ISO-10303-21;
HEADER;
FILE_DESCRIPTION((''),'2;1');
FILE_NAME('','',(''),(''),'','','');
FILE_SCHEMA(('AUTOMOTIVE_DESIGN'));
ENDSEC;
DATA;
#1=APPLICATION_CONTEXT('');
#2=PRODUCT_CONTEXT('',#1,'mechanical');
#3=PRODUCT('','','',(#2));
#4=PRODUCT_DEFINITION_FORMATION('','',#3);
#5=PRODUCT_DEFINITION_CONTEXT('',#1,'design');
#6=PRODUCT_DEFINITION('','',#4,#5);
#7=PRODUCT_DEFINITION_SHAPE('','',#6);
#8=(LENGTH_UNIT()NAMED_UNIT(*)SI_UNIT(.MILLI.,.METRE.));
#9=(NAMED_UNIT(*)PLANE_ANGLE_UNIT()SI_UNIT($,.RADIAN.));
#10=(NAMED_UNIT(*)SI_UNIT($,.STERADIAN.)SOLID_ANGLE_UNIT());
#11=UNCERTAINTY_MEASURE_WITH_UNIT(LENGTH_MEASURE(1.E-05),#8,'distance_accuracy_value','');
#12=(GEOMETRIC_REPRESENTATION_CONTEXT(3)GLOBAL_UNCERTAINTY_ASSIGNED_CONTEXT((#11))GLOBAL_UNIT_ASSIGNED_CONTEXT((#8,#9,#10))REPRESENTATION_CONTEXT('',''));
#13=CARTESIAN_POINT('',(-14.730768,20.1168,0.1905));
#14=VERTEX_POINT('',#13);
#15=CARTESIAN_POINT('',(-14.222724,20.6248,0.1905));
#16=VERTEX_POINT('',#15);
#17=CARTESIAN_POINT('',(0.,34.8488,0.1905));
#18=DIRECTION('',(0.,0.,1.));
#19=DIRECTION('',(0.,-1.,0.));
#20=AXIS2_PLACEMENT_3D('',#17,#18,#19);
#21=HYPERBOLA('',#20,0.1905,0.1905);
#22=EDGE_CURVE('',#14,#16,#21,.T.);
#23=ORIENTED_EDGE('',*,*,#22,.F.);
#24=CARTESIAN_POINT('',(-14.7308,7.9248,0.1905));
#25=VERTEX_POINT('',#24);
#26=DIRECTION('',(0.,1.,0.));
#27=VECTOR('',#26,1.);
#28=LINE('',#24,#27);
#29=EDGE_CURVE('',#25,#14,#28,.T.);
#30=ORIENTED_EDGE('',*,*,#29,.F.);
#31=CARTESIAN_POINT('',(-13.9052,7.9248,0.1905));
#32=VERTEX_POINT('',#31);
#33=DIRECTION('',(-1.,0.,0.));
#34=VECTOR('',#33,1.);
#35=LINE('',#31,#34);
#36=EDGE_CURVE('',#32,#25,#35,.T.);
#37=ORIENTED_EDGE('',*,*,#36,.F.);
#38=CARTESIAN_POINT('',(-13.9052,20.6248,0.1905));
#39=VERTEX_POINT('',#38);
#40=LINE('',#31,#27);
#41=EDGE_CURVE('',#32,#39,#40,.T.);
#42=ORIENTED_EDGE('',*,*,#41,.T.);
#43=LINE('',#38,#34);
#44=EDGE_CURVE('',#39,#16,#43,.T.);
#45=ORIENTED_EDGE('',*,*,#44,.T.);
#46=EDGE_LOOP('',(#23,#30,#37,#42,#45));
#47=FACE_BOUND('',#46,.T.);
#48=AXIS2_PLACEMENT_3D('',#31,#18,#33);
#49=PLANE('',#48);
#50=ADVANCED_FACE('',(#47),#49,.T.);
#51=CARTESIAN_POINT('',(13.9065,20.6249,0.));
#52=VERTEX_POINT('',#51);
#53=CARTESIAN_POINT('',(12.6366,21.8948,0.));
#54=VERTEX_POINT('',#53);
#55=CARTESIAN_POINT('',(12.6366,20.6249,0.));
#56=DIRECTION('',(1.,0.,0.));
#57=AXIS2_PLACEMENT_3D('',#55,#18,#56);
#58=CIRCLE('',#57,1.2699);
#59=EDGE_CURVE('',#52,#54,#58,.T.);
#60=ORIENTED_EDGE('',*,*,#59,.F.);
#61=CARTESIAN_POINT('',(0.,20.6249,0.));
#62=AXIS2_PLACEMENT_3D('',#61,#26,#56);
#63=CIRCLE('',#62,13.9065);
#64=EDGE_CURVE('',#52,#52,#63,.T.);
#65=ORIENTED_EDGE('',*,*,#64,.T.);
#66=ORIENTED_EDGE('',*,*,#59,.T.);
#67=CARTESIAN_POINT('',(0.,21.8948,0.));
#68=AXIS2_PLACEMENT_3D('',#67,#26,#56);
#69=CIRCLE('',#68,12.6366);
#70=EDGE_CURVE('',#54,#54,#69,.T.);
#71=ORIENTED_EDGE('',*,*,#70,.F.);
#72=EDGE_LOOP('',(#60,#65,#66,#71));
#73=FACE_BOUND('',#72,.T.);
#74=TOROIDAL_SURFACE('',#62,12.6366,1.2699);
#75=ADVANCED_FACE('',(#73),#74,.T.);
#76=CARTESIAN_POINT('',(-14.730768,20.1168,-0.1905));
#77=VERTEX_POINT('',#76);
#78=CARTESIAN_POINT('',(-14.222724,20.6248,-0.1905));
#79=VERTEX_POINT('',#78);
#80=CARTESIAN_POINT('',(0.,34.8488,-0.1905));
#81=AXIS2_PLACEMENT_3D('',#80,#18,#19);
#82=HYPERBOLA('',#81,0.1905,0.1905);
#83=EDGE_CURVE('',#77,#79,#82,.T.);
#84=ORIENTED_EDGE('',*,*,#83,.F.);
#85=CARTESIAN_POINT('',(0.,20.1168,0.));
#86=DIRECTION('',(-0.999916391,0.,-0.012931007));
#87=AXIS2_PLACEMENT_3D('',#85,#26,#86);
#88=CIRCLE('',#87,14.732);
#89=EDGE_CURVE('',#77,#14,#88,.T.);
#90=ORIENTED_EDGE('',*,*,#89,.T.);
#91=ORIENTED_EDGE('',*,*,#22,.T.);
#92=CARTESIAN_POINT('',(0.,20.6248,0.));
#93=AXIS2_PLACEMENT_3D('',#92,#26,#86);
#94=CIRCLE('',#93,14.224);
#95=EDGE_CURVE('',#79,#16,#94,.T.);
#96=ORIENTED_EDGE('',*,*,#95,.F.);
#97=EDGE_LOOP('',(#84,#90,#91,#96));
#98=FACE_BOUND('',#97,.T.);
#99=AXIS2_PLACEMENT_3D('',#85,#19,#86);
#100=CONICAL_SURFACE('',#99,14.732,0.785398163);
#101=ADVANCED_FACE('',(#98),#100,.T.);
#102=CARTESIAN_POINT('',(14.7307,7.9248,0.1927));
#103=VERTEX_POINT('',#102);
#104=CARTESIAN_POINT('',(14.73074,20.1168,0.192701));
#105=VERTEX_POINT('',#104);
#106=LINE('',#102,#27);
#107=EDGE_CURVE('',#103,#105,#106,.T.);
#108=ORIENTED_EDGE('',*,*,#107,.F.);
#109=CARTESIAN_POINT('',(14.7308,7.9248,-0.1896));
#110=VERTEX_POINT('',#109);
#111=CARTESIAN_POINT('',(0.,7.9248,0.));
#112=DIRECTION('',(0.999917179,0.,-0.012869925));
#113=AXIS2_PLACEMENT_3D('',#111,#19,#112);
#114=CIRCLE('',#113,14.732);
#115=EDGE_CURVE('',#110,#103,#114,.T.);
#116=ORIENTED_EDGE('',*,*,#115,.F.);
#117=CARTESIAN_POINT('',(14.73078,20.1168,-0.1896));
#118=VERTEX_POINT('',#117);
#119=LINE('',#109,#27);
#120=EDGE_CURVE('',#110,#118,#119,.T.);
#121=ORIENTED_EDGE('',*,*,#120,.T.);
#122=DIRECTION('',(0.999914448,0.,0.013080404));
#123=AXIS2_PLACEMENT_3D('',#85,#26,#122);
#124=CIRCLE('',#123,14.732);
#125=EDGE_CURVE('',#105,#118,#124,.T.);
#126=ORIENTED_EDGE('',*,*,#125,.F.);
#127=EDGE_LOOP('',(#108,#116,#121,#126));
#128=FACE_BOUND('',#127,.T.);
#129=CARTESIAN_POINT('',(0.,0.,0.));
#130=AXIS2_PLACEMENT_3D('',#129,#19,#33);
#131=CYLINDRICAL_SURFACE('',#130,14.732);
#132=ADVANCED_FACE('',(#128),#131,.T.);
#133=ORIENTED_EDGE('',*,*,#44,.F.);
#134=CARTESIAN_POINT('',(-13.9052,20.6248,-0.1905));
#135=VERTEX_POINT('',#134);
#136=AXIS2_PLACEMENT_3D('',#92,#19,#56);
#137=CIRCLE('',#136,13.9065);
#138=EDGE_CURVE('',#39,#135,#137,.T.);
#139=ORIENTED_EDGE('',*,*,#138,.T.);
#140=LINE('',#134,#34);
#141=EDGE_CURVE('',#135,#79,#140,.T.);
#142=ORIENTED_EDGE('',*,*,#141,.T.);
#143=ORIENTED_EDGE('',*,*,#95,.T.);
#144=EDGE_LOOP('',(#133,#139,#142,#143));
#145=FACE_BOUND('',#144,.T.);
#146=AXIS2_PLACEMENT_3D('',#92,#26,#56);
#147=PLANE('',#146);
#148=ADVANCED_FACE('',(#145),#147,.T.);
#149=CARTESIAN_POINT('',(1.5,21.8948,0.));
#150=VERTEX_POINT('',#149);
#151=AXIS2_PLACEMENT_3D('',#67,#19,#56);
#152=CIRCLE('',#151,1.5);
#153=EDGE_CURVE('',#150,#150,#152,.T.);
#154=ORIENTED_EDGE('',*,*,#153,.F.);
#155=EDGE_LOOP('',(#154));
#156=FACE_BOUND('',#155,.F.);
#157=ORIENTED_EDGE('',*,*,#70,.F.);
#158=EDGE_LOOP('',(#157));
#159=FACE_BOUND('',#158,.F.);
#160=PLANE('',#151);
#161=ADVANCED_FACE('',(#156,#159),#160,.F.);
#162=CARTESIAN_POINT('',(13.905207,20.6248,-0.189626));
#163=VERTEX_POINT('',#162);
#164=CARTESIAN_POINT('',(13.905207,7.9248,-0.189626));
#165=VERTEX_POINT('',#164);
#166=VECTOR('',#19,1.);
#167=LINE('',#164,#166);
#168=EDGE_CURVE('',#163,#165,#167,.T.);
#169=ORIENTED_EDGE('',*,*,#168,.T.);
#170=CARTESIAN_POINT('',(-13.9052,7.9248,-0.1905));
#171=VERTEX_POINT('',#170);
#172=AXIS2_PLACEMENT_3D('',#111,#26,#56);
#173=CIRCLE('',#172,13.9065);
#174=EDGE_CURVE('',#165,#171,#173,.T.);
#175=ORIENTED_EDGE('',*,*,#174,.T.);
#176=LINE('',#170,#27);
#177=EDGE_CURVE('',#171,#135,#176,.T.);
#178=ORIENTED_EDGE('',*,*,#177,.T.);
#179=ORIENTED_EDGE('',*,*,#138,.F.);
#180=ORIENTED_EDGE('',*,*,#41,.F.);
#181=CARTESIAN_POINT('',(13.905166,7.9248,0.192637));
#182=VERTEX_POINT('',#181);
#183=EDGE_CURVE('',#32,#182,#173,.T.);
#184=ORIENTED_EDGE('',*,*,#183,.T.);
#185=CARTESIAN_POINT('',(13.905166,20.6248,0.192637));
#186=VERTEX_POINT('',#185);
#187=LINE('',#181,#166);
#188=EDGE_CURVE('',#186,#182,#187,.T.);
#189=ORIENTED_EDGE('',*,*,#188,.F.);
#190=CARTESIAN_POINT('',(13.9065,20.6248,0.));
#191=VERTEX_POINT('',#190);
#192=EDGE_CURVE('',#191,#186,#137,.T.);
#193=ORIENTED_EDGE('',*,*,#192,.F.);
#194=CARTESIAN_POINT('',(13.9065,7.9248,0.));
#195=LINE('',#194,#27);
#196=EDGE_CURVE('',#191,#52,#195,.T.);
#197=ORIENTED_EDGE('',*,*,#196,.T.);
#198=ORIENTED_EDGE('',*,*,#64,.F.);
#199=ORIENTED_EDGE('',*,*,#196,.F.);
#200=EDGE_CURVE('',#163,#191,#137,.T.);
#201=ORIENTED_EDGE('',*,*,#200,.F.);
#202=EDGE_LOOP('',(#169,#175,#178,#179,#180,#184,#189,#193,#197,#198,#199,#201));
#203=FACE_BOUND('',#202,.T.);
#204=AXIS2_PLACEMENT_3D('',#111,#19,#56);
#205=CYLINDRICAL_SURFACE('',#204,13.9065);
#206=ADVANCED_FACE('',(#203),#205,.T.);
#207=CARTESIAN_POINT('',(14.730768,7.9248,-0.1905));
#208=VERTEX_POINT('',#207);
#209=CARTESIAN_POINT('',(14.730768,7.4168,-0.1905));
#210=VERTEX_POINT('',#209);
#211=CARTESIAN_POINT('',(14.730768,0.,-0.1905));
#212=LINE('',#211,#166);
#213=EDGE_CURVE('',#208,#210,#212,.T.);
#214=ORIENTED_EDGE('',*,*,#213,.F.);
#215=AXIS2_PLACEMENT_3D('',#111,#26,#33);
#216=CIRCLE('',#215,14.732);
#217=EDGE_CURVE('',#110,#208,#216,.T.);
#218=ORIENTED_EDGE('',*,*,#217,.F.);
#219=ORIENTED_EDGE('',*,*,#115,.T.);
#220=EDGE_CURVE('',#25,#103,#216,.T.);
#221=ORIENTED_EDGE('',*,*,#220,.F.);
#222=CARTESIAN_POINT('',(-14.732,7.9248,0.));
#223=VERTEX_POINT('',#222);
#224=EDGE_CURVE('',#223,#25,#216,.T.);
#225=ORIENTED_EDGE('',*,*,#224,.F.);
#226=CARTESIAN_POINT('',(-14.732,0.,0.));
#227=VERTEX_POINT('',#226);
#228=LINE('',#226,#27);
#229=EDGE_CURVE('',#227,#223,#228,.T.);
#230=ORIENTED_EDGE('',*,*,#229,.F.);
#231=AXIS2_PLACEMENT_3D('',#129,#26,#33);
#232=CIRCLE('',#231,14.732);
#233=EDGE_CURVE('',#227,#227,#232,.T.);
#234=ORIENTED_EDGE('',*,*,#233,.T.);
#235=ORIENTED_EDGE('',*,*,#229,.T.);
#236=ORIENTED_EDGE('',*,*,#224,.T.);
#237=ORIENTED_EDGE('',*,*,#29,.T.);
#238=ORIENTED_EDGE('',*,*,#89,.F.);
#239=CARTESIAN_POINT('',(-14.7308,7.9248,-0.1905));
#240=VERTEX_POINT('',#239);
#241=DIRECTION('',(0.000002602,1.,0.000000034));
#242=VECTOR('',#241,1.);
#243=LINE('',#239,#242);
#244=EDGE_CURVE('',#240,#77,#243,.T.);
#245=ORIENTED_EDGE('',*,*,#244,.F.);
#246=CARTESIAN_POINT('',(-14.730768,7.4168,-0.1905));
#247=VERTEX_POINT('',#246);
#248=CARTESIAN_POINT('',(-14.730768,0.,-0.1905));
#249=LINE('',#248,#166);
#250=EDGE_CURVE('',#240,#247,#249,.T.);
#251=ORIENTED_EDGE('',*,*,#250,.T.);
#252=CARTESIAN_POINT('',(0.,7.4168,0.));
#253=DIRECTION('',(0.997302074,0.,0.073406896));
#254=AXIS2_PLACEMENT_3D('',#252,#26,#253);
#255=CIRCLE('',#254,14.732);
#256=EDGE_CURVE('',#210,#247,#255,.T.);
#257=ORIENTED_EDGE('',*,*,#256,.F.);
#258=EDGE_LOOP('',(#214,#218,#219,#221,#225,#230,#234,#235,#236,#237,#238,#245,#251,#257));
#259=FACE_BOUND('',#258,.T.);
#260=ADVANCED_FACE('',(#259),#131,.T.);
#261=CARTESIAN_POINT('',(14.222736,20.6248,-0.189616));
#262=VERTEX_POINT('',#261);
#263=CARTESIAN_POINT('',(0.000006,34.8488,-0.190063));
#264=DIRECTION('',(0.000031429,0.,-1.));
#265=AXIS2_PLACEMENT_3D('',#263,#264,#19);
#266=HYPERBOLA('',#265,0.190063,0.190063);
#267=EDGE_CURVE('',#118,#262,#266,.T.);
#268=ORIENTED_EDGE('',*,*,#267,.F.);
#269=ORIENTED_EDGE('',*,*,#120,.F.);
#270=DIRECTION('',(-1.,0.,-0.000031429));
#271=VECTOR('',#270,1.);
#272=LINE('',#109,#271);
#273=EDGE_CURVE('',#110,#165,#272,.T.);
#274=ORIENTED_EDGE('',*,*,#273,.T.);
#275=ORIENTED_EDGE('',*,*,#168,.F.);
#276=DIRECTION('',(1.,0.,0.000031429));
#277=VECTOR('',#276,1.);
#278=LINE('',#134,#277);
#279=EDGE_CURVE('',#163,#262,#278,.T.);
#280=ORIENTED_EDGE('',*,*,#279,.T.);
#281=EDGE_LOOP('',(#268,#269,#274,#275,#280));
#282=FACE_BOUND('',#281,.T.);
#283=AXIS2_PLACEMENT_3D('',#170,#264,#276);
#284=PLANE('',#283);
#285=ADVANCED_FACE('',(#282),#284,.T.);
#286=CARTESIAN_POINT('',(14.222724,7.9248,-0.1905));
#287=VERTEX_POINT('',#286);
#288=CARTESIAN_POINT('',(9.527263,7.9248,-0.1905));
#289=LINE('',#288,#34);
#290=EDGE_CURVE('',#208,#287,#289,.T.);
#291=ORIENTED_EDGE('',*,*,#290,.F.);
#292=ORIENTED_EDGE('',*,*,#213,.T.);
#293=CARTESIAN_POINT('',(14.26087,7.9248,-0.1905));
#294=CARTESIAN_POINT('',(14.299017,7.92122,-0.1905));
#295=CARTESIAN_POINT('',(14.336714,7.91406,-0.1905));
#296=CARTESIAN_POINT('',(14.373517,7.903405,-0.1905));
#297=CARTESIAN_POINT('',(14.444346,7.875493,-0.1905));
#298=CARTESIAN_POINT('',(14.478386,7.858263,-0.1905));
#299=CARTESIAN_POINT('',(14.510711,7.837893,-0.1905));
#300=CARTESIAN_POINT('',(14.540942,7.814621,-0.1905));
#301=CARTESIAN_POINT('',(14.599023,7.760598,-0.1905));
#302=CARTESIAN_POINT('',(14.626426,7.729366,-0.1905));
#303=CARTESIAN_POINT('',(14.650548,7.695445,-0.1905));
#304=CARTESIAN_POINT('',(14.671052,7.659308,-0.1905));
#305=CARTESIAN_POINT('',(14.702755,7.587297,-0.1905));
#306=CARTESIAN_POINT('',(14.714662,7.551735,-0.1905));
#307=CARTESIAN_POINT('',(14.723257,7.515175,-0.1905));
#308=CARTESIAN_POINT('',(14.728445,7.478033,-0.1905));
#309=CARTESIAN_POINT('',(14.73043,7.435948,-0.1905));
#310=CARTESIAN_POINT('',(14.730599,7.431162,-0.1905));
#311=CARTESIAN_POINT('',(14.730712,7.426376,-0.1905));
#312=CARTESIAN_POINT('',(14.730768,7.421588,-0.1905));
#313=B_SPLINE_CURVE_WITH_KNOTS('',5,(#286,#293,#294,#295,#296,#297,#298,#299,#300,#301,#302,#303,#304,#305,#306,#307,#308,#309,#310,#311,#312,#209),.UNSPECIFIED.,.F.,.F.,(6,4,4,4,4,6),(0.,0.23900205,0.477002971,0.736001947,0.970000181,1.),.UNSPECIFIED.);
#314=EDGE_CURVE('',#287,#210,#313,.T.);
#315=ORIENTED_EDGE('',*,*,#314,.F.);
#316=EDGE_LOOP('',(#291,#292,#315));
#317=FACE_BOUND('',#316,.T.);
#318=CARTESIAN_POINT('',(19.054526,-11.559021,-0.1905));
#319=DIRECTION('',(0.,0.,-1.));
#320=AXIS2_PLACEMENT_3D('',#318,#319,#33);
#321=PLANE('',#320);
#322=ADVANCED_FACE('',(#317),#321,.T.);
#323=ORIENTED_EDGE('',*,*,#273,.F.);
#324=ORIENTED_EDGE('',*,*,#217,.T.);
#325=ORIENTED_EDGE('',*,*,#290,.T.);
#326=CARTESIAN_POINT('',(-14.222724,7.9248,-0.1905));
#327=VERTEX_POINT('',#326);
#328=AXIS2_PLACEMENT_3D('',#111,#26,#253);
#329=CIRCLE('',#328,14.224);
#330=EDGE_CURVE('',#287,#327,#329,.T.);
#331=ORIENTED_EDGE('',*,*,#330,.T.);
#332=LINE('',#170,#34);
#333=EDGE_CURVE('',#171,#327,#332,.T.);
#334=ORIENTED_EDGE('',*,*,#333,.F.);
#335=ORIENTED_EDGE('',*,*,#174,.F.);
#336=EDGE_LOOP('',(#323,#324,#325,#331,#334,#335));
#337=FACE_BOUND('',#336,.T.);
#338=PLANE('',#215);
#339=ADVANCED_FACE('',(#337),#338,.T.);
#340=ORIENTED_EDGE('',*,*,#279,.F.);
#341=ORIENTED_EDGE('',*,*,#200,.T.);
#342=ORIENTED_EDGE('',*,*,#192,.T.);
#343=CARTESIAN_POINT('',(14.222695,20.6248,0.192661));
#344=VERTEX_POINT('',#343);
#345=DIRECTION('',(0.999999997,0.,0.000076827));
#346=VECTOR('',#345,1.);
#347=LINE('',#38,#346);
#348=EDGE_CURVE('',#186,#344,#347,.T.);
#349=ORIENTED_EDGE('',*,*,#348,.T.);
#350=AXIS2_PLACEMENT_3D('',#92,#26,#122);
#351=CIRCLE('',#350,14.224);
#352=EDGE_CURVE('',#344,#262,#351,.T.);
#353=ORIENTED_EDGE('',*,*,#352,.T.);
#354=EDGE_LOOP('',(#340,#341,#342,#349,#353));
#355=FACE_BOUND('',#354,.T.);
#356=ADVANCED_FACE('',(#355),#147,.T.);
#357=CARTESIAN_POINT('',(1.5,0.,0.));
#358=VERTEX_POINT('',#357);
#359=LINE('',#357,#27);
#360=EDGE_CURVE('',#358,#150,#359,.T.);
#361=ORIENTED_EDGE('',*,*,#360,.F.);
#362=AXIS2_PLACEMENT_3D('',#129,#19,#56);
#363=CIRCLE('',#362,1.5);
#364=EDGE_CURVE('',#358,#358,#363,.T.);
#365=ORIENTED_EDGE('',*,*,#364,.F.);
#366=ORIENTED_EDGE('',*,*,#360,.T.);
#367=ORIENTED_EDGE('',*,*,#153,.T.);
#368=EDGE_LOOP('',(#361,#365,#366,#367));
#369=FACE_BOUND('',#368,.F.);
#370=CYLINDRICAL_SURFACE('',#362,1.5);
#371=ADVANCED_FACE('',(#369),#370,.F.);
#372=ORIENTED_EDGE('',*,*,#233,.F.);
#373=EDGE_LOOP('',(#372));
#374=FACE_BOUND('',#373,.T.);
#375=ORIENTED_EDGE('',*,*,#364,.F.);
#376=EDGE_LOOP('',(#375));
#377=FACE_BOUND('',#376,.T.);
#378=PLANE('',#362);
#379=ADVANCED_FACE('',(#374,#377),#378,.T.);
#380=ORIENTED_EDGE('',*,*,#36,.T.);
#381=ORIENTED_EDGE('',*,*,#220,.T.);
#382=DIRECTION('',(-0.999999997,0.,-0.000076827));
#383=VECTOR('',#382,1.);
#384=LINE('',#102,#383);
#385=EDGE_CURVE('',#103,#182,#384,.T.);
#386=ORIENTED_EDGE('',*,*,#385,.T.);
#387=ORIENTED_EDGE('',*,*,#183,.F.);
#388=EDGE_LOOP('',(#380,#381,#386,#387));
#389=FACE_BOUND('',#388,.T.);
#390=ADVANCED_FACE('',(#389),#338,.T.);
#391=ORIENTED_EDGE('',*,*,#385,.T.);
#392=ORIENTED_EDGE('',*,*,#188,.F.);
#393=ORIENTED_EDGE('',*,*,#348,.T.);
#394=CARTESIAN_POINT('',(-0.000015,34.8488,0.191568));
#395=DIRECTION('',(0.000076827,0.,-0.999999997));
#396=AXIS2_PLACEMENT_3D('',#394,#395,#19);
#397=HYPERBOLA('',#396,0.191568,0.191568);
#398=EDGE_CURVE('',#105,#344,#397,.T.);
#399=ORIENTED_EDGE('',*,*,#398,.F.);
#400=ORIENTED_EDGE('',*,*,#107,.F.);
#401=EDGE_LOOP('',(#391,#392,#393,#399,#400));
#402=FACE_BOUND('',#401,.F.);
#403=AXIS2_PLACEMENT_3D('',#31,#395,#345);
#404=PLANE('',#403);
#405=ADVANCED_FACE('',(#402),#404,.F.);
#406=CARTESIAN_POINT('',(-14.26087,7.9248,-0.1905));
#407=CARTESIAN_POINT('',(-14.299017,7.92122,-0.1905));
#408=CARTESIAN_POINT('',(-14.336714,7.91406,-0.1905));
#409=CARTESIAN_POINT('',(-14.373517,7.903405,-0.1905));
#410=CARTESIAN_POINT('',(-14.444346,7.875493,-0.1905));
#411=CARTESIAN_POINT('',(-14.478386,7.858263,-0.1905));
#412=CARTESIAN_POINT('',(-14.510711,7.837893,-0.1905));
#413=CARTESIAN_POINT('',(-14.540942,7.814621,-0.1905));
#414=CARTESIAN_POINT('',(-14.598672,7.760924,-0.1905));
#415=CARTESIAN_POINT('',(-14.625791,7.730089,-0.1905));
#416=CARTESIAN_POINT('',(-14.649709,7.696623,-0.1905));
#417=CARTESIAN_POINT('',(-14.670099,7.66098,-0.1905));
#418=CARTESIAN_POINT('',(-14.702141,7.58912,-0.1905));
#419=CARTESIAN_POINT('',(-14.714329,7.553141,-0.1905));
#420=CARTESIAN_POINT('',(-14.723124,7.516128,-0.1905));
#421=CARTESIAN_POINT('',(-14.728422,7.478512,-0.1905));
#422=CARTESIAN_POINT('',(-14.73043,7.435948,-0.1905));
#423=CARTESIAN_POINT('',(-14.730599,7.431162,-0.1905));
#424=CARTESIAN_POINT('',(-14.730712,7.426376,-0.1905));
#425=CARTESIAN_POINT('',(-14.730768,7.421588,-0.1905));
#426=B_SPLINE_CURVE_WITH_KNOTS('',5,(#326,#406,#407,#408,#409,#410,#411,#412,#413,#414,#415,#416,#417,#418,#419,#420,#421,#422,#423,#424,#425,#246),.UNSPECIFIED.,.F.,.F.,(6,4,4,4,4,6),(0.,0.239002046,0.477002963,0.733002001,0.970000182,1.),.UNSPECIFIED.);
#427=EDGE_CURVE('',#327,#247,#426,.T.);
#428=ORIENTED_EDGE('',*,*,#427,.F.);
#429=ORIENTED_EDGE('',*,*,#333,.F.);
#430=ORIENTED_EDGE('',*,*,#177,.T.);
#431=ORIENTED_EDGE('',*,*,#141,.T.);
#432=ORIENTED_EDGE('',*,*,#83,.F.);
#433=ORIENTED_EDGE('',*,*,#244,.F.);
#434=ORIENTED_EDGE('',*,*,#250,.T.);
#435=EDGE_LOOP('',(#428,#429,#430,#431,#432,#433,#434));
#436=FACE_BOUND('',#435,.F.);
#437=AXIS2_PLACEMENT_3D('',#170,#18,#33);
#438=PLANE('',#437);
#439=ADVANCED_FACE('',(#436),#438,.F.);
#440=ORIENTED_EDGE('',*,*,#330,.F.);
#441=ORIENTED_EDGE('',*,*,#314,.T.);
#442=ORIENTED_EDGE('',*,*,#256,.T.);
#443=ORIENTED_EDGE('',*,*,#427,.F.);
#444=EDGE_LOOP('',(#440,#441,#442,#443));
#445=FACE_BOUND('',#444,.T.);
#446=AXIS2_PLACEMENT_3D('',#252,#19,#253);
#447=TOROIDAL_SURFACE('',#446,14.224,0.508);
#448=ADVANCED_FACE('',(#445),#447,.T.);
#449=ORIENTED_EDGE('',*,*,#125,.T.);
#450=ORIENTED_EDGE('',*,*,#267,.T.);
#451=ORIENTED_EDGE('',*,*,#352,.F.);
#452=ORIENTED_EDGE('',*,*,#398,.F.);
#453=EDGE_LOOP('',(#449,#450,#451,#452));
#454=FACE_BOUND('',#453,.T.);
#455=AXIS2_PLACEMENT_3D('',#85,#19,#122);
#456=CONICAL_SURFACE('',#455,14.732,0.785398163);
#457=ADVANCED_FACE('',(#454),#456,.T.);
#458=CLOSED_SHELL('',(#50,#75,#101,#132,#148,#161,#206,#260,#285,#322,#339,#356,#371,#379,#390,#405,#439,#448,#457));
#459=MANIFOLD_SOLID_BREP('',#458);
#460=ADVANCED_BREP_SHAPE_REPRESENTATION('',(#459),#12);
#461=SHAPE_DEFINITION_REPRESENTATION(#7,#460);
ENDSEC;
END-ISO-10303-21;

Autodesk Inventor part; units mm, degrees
ref_plane "YZ Plane" through (0, 0, 0) normal (1, 0, 0) x (0, 1, 0)
ref_plane "XZ Plane" through (0, 0, 0) normal (0, 1, 0) x (-1, 0, 0)
ref_plane "XY Plane" through (0, 0, 0) normal (0, 0, 1) x (1, 0, 0)
sketch "Sketch1" plane through (0, 0, 0) normal (0, 1, 0) x (-1, 0, 0)
  circle A0 centre (0, 0) radius 14.732
  dimension "d0" = 29.464
extrude "Extrusion1" add sketch "Sketch1" along normal blind 7.9248
sketch "Sketch2" plane through (0, 7.9248, 0) normal (0, 1, 0) x (1, 0, 0)
  circle A0 centre (0, 0) radius 14.732 projected
  circle A1 centre (0, 0) radius 13.9065
  dimension "d3" = 27.813
extrude "Extrusion2" add sketch "Sketch2" along normal blind 13.97 contours A1
sketch "Sketch4" plane through (0, 7.9248, 0) normal (0, 1, 0) x (1, 0, 0)
  circle A0 centre (0, 0) radius 13.9065 projected
  circle A1 centre (0, 0) radius 14.732 projected
  circle A2 centre (0, 0) radius 13.9065
  circle A3 centre (0, 0) radius 14.732
  line L0 (-13.905, 0.2046) -> (-13.0794, 0.2046) construction
  line L1 (-13.9052, 0.1905) -> (-14.7308, 0.1905)
  line L2 (-13.9052, 0.1905) -> (-13.0796, 0.1905) construction
  line L3 (-13.9052, -0.1905) -> (-14.7308, -0.1905)
  line L4 (-13.9052, -0.1905) -> (-13.0796, -0.1905) construction
  line L5 (-13.9052, 0.1905) -> (14.7308, 0.1896)
  line L6 (-13.9052, -0.1905) -> (14.7307, -0.1927)
  dimension "d7" = 180
  dimension "d8" = 180
extrude "Extrusion3" add sketch "Sketch4" along normal blind 12.7 contours L5 A0 L6 | A0 L3 A1 L1 | L5 A1 L6 A0
chamfer "Chamfer1" distance 0.508 angle 45 1 edges at (14.732, 20.6248, 0.0015)
chamfer "Chamfer2" distance 0.508 angle 45 1 edges at (-14.732, 20.6248, 0)
fillet "Fillet1" radius 1.27 1 edges at (-13.9065, 21.8948, 0)
fillet "Fillet2" radius 0.508 1 edges at (0.0004, 7.9248, -14.732)
sketch "Sketch5" plane through (0, 21.8948, 0) normal (0, 1, 0) x (1, 0, 0)
  circle A0 centre (0, 0) radius 12.6365 projected
  circle A1 centre (0, 0) radius 7.9375
  dimension "d19" = 15.875
extrude "Extrusion4" cut sketch "Sketch5" against normal blind 25.4 contours A1
sketch "Sketch6" plane through (0, 0, 0) normal (0, -1, 0) x (1, 0, 0)
  circle A0 centre (0, 0) radius 7.9375 projected
  circle A1 centre (0, 0) radius 14.732 projected
  circle A2 centre (0, 0) radius 7.9375
  circle A3 centre (0, 0) radius 1.5
  dimension "d22" = 3
extrude "Extrusion5" add sketch "Sketch6" against normal blind 21.8948 contours A0
properties part number "Pipe Cap 2"
